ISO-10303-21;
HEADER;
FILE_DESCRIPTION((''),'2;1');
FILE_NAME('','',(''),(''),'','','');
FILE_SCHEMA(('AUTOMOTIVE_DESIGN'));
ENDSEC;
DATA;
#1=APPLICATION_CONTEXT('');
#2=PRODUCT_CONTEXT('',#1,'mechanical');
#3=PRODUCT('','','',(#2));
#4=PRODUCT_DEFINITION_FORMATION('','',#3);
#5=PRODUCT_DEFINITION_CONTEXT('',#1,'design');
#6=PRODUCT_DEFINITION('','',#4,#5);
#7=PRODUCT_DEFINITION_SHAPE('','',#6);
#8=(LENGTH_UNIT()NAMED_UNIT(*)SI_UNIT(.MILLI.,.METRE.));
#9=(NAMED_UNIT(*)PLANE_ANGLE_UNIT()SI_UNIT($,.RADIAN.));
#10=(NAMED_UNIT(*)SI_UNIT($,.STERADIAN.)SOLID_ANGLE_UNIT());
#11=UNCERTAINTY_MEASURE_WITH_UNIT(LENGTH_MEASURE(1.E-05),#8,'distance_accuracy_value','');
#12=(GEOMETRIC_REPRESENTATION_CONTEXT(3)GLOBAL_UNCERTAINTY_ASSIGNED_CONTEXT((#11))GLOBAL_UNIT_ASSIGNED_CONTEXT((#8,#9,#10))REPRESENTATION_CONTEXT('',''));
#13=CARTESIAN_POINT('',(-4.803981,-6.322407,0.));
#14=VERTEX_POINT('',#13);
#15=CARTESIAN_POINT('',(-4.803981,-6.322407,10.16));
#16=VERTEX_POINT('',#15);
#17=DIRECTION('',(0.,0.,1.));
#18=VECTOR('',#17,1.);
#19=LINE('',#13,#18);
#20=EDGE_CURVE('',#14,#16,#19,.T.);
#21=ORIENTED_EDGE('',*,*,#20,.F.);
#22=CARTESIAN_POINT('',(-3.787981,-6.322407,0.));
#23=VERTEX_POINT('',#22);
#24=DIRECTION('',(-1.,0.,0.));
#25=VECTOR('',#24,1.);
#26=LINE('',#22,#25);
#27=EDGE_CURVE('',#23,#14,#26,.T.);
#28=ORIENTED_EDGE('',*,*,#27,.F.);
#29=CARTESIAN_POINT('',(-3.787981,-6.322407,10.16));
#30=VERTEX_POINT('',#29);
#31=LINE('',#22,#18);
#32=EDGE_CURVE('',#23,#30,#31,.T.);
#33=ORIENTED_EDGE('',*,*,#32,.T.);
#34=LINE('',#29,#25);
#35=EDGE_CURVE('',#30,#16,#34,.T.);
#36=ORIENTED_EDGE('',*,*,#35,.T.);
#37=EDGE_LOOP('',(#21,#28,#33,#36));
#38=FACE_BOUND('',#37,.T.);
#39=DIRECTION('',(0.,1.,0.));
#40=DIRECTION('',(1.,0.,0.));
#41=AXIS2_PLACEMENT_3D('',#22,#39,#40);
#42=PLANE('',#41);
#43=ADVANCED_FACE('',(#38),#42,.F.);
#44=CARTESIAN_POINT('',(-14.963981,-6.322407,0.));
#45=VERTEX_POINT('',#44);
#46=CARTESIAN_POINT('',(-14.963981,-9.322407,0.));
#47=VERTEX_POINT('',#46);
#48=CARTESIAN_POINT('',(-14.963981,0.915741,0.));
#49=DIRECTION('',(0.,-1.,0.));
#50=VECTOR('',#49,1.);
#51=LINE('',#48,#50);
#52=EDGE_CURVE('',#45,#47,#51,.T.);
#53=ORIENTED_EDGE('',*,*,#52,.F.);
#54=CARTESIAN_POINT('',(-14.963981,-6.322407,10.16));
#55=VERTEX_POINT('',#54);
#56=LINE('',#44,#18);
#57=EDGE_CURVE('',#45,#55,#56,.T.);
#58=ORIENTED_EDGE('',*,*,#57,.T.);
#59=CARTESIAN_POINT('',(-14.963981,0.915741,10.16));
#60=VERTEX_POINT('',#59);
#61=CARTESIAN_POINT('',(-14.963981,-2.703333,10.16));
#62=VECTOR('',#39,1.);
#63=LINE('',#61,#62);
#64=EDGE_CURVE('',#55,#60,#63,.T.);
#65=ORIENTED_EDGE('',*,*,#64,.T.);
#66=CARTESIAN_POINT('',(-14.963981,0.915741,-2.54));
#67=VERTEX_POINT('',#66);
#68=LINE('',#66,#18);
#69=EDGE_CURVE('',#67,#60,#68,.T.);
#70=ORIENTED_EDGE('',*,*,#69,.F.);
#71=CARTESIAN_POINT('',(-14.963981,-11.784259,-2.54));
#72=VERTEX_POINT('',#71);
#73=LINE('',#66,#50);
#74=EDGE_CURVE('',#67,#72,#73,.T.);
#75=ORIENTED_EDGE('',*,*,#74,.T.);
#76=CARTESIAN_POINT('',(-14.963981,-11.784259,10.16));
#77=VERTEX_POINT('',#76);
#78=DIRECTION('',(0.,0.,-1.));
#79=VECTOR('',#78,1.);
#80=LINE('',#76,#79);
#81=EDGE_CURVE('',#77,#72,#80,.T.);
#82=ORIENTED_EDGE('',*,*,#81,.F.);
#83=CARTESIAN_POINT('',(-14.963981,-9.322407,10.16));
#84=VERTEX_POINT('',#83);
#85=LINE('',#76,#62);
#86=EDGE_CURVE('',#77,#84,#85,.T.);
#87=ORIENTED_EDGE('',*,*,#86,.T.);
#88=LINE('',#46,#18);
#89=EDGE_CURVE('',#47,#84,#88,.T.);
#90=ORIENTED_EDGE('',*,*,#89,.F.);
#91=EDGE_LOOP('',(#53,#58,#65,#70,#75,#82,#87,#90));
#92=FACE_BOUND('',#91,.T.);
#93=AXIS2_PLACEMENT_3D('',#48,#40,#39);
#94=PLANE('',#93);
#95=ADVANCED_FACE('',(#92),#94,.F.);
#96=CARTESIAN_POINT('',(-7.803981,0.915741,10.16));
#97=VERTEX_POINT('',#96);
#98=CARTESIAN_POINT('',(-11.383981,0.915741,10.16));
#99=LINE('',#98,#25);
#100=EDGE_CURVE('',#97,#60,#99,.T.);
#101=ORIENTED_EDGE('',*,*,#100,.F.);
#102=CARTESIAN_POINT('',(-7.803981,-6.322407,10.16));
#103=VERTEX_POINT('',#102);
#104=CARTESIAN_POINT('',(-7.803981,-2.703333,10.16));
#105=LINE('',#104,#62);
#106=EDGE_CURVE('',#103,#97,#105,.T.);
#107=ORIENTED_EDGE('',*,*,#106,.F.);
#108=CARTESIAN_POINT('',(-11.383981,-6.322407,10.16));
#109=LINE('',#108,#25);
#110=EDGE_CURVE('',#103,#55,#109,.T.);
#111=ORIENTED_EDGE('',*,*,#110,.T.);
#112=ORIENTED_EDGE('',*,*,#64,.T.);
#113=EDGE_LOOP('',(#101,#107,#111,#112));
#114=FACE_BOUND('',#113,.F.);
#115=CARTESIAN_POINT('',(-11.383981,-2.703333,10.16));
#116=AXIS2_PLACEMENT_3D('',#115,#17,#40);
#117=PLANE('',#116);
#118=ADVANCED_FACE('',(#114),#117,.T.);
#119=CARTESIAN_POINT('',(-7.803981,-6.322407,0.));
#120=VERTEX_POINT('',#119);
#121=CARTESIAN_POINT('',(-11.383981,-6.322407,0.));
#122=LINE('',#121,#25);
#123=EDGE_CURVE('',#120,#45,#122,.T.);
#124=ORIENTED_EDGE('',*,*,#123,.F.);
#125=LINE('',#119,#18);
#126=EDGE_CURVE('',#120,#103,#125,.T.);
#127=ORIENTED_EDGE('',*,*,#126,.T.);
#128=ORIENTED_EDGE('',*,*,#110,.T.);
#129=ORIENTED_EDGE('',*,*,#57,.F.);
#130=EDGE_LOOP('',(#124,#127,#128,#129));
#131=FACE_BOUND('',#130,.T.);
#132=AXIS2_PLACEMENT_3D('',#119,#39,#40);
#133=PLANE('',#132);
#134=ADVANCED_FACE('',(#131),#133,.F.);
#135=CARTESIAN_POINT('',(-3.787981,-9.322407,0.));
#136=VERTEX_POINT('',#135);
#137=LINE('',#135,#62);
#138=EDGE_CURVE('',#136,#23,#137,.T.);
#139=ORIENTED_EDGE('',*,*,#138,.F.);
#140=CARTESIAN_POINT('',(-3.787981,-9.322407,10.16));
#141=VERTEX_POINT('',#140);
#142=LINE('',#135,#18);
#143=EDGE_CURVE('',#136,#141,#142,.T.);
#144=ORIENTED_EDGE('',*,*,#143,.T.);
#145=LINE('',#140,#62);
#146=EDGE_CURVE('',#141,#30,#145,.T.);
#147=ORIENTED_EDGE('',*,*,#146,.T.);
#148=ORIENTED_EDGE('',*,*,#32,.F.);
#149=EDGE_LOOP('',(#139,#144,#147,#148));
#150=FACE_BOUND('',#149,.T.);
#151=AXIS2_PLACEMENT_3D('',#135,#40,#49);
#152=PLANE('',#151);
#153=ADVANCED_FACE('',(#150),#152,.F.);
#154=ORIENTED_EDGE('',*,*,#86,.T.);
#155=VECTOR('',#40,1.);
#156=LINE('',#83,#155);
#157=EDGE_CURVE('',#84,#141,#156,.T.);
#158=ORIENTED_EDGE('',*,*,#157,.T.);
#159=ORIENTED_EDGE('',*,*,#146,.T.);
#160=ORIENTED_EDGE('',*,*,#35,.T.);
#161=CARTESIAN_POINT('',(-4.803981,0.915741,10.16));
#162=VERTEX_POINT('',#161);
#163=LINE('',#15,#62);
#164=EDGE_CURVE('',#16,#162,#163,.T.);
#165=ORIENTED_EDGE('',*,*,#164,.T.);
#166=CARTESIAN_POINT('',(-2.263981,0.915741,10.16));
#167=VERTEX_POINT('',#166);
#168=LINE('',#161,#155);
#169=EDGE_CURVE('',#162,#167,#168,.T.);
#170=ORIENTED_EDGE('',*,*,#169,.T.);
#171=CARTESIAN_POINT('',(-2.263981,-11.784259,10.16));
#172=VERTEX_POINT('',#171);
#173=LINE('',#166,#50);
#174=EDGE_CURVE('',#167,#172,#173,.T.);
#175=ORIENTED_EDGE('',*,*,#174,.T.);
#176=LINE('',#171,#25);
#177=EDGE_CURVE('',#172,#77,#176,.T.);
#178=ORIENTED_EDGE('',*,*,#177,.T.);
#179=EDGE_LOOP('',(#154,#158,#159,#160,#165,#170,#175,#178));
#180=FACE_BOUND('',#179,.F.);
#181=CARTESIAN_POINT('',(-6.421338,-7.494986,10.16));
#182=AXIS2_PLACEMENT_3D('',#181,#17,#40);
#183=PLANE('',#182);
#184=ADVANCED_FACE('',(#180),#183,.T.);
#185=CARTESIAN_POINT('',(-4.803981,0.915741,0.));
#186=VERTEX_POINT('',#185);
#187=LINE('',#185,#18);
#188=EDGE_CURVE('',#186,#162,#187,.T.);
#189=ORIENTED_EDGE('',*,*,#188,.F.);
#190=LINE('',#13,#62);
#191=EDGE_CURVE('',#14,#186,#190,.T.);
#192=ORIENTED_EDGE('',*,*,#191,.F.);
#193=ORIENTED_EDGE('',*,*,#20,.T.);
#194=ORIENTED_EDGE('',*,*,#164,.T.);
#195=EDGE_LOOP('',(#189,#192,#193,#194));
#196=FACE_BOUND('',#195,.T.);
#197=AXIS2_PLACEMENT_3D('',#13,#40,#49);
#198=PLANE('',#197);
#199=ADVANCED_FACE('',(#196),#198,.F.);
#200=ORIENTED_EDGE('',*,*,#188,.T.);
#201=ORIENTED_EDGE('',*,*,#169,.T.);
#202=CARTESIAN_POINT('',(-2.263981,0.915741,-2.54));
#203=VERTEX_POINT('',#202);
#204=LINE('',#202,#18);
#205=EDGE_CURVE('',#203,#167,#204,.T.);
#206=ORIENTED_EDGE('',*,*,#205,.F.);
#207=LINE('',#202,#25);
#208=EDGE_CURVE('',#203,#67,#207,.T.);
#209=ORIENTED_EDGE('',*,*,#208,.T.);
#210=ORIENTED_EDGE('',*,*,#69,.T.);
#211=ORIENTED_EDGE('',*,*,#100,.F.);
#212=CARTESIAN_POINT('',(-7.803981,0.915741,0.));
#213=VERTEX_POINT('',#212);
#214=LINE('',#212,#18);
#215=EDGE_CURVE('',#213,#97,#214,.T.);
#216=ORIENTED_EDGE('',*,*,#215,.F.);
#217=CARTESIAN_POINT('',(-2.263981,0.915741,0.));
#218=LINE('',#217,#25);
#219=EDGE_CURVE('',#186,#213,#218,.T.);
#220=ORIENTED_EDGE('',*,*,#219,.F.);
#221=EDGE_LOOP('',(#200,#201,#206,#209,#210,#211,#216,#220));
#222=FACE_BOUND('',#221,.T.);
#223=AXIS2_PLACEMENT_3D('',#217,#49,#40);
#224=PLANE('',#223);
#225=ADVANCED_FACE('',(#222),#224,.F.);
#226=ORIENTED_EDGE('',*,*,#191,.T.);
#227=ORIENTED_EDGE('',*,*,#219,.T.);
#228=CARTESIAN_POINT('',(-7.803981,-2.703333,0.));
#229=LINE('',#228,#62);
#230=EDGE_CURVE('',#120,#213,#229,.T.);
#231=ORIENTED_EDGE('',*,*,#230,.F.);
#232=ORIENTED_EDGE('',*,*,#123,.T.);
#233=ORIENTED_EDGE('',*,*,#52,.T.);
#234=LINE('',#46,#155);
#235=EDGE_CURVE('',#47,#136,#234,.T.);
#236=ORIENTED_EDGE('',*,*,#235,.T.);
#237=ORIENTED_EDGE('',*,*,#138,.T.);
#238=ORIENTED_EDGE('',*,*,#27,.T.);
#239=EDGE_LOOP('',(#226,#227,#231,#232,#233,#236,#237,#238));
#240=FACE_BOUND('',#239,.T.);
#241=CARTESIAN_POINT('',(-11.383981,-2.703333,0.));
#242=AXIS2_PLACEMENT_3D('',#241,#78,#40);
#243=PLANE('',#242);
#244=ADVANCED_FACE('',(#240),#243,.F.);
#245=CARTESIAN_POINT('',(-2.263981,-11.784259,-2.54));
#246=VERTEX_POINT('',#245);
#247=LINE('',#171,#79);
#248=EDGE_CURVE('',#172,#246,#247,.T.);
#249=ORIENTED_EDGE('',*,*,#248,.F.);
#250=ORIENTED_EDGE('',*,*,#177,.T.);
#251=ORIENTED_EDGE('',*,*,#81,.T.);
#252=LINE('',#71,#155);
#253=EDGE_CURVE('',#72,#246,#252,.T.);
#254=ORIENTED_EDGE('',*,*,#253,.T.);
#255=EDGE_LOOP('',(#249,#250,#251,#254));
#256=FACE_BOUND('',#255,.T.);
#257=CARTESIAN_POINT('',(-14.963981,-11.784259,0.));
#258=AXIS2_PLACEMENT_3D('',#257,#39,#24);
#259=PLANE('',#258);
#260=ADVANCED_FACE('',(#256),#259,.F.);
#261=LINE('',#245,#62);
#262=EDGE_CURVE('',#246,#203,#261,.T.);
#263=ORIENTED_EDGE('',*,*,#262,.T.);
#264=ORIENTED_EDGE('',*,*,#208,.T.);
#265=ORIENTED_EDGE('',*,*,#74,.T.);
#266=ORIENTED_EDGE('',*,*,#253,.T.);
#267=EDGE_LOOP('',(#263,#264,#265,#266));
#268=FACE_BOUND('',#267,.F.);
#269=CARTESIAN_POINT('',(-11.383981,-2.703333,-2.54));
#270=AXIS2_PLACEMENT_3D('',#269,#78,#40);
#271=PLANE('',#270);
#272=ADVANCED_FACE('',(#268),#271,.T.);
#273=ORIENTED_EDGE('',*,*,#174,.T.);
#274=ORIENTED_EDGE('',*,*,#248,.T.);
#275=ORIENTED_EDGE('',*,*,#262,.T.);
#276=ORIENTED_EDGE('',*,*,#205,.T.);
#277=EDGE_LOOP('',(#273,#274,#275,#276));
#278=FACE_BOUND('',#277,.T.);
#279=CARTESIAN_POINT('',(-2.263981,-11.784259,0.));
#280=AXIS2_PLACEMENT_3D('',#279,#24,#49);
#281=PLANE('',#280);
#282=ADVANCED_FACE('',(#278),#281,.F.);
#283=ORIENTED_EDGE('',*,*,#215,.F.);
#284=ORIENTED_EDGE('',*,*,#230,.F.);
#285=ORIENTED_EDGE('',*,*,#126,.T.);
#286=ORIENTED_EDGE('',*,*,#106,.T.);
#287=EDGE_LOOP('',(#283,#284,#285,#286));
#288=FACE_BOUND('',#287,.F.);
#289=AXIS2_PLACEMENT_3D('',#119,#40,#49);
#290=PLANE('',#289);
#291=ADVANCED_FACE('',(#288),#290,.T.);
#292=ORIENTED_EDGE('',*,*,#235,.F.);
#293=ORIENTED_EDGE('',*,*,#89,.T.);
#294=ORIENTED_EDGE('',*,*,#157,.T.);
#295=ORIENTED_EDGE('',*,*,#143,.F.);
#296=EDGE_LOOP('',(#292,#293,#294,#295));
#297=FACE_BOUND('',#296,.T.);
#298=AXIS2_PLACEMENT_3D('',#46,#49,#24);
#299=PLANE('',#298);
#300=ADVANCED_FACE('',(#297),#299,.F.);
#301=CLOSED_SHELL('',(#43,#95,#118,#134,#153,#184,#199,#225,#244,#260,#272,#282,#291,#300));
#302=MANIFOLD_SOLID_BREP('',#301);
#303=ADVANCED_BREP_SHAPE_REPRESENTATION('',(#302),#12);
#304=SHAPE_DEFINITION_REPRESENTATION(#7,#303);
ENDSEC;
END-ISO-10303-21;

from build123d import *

# Parameters (mm, degrees)
F0_W     = 7.16
F0_H     = 7.2381474632
F1_DEPTH = 10.16
F2_W     = 7.16
F2_H     = 7.2381474632
F3_DEPTH = 2.54


# Not quite as in the source:
# - a feature of the source that left no trace in its solid (it failed there, or was rolled back) is left out


with BuildPart() as f1:
    # F0 (on Top) → F1 (new body)
    with BuildSketch(Plane.XY):
        with Locations((-5.8439813066, -2.7033329925)):
            Rectangle(F0_W, F0_H)
    extrude(amount=F1_DEPTH)



with BuildPart() as f1b:
    # F0 (on Top) → F1, piece 2 (new body)
    with BuildSketch(Plane.XY):
        Polygon((-12.4239813066, 0.9157407391), (-14.9639813066, 0.9157407391), (-14.9639813066, -11.7842592609), (-2.2639813066, -11.7842592609), (-2.2639813066, -9.3224067241), (-9.4239813066, -9.3224067241), (-12.4239813066, -9.3224067241), (-13.4399813066, -9.3224067241), (-13.4399813066, -6.3224067241), (-12.4239813066, -6.3224067241), align=None)
    extrude(amount=F1_DEPTH)


with BuildPart() as f1_1:
    add(f1.part)

    add(f1b.part)  # F3 merges F1b
    # F2 (on face) → F3 (join)
    with BuildSketch(Plane(origin=(0, 0, 0), x_dir=(1, 0, 0), z_dir=(0, 0, -1))):
        with Locations((-5.8439813066, 2.7033329925)):
            Rectangle(F2_W, F2_H)
        Polygon((-2.2639813066, 9.3224067241), (-13.4399813066, 9.3224067241), (-13.4399813066, 6.3224067241), (-12.4239813066, 6.3224067241), (-12.4239813066, -0.9157407391), (-9.4239813066, -0.9157407391), (-9.4239813066, 6.3224067241), (-2.2639813066, 6.3224067241), align=None)
        Polygon((-13.4399813066, 6.3224067241), (-13.4399813066, 9.3224067241), (-2.2639813066, 9.3224067241), (-2.2639813066, 11.7842592609), (-14.9639813066, 11.7842592609), (-14.9639813066, -0.9157407391), (-12.4239813066, -0.9157407391), (-12.4239813066, 6.3224067241), align=None)
    extrude(amount=F3_DEPTH)


with BuildPart() as f5_1:
    # F5: instance of F1
    add(f1_1.part.mirror(Plane(origin=(-8.6139813066, -4.877797716, 3.5140776699), x_dir=(0, 1, 0), z_dir=(1, 0, 0))))


solid = f5_1.part
